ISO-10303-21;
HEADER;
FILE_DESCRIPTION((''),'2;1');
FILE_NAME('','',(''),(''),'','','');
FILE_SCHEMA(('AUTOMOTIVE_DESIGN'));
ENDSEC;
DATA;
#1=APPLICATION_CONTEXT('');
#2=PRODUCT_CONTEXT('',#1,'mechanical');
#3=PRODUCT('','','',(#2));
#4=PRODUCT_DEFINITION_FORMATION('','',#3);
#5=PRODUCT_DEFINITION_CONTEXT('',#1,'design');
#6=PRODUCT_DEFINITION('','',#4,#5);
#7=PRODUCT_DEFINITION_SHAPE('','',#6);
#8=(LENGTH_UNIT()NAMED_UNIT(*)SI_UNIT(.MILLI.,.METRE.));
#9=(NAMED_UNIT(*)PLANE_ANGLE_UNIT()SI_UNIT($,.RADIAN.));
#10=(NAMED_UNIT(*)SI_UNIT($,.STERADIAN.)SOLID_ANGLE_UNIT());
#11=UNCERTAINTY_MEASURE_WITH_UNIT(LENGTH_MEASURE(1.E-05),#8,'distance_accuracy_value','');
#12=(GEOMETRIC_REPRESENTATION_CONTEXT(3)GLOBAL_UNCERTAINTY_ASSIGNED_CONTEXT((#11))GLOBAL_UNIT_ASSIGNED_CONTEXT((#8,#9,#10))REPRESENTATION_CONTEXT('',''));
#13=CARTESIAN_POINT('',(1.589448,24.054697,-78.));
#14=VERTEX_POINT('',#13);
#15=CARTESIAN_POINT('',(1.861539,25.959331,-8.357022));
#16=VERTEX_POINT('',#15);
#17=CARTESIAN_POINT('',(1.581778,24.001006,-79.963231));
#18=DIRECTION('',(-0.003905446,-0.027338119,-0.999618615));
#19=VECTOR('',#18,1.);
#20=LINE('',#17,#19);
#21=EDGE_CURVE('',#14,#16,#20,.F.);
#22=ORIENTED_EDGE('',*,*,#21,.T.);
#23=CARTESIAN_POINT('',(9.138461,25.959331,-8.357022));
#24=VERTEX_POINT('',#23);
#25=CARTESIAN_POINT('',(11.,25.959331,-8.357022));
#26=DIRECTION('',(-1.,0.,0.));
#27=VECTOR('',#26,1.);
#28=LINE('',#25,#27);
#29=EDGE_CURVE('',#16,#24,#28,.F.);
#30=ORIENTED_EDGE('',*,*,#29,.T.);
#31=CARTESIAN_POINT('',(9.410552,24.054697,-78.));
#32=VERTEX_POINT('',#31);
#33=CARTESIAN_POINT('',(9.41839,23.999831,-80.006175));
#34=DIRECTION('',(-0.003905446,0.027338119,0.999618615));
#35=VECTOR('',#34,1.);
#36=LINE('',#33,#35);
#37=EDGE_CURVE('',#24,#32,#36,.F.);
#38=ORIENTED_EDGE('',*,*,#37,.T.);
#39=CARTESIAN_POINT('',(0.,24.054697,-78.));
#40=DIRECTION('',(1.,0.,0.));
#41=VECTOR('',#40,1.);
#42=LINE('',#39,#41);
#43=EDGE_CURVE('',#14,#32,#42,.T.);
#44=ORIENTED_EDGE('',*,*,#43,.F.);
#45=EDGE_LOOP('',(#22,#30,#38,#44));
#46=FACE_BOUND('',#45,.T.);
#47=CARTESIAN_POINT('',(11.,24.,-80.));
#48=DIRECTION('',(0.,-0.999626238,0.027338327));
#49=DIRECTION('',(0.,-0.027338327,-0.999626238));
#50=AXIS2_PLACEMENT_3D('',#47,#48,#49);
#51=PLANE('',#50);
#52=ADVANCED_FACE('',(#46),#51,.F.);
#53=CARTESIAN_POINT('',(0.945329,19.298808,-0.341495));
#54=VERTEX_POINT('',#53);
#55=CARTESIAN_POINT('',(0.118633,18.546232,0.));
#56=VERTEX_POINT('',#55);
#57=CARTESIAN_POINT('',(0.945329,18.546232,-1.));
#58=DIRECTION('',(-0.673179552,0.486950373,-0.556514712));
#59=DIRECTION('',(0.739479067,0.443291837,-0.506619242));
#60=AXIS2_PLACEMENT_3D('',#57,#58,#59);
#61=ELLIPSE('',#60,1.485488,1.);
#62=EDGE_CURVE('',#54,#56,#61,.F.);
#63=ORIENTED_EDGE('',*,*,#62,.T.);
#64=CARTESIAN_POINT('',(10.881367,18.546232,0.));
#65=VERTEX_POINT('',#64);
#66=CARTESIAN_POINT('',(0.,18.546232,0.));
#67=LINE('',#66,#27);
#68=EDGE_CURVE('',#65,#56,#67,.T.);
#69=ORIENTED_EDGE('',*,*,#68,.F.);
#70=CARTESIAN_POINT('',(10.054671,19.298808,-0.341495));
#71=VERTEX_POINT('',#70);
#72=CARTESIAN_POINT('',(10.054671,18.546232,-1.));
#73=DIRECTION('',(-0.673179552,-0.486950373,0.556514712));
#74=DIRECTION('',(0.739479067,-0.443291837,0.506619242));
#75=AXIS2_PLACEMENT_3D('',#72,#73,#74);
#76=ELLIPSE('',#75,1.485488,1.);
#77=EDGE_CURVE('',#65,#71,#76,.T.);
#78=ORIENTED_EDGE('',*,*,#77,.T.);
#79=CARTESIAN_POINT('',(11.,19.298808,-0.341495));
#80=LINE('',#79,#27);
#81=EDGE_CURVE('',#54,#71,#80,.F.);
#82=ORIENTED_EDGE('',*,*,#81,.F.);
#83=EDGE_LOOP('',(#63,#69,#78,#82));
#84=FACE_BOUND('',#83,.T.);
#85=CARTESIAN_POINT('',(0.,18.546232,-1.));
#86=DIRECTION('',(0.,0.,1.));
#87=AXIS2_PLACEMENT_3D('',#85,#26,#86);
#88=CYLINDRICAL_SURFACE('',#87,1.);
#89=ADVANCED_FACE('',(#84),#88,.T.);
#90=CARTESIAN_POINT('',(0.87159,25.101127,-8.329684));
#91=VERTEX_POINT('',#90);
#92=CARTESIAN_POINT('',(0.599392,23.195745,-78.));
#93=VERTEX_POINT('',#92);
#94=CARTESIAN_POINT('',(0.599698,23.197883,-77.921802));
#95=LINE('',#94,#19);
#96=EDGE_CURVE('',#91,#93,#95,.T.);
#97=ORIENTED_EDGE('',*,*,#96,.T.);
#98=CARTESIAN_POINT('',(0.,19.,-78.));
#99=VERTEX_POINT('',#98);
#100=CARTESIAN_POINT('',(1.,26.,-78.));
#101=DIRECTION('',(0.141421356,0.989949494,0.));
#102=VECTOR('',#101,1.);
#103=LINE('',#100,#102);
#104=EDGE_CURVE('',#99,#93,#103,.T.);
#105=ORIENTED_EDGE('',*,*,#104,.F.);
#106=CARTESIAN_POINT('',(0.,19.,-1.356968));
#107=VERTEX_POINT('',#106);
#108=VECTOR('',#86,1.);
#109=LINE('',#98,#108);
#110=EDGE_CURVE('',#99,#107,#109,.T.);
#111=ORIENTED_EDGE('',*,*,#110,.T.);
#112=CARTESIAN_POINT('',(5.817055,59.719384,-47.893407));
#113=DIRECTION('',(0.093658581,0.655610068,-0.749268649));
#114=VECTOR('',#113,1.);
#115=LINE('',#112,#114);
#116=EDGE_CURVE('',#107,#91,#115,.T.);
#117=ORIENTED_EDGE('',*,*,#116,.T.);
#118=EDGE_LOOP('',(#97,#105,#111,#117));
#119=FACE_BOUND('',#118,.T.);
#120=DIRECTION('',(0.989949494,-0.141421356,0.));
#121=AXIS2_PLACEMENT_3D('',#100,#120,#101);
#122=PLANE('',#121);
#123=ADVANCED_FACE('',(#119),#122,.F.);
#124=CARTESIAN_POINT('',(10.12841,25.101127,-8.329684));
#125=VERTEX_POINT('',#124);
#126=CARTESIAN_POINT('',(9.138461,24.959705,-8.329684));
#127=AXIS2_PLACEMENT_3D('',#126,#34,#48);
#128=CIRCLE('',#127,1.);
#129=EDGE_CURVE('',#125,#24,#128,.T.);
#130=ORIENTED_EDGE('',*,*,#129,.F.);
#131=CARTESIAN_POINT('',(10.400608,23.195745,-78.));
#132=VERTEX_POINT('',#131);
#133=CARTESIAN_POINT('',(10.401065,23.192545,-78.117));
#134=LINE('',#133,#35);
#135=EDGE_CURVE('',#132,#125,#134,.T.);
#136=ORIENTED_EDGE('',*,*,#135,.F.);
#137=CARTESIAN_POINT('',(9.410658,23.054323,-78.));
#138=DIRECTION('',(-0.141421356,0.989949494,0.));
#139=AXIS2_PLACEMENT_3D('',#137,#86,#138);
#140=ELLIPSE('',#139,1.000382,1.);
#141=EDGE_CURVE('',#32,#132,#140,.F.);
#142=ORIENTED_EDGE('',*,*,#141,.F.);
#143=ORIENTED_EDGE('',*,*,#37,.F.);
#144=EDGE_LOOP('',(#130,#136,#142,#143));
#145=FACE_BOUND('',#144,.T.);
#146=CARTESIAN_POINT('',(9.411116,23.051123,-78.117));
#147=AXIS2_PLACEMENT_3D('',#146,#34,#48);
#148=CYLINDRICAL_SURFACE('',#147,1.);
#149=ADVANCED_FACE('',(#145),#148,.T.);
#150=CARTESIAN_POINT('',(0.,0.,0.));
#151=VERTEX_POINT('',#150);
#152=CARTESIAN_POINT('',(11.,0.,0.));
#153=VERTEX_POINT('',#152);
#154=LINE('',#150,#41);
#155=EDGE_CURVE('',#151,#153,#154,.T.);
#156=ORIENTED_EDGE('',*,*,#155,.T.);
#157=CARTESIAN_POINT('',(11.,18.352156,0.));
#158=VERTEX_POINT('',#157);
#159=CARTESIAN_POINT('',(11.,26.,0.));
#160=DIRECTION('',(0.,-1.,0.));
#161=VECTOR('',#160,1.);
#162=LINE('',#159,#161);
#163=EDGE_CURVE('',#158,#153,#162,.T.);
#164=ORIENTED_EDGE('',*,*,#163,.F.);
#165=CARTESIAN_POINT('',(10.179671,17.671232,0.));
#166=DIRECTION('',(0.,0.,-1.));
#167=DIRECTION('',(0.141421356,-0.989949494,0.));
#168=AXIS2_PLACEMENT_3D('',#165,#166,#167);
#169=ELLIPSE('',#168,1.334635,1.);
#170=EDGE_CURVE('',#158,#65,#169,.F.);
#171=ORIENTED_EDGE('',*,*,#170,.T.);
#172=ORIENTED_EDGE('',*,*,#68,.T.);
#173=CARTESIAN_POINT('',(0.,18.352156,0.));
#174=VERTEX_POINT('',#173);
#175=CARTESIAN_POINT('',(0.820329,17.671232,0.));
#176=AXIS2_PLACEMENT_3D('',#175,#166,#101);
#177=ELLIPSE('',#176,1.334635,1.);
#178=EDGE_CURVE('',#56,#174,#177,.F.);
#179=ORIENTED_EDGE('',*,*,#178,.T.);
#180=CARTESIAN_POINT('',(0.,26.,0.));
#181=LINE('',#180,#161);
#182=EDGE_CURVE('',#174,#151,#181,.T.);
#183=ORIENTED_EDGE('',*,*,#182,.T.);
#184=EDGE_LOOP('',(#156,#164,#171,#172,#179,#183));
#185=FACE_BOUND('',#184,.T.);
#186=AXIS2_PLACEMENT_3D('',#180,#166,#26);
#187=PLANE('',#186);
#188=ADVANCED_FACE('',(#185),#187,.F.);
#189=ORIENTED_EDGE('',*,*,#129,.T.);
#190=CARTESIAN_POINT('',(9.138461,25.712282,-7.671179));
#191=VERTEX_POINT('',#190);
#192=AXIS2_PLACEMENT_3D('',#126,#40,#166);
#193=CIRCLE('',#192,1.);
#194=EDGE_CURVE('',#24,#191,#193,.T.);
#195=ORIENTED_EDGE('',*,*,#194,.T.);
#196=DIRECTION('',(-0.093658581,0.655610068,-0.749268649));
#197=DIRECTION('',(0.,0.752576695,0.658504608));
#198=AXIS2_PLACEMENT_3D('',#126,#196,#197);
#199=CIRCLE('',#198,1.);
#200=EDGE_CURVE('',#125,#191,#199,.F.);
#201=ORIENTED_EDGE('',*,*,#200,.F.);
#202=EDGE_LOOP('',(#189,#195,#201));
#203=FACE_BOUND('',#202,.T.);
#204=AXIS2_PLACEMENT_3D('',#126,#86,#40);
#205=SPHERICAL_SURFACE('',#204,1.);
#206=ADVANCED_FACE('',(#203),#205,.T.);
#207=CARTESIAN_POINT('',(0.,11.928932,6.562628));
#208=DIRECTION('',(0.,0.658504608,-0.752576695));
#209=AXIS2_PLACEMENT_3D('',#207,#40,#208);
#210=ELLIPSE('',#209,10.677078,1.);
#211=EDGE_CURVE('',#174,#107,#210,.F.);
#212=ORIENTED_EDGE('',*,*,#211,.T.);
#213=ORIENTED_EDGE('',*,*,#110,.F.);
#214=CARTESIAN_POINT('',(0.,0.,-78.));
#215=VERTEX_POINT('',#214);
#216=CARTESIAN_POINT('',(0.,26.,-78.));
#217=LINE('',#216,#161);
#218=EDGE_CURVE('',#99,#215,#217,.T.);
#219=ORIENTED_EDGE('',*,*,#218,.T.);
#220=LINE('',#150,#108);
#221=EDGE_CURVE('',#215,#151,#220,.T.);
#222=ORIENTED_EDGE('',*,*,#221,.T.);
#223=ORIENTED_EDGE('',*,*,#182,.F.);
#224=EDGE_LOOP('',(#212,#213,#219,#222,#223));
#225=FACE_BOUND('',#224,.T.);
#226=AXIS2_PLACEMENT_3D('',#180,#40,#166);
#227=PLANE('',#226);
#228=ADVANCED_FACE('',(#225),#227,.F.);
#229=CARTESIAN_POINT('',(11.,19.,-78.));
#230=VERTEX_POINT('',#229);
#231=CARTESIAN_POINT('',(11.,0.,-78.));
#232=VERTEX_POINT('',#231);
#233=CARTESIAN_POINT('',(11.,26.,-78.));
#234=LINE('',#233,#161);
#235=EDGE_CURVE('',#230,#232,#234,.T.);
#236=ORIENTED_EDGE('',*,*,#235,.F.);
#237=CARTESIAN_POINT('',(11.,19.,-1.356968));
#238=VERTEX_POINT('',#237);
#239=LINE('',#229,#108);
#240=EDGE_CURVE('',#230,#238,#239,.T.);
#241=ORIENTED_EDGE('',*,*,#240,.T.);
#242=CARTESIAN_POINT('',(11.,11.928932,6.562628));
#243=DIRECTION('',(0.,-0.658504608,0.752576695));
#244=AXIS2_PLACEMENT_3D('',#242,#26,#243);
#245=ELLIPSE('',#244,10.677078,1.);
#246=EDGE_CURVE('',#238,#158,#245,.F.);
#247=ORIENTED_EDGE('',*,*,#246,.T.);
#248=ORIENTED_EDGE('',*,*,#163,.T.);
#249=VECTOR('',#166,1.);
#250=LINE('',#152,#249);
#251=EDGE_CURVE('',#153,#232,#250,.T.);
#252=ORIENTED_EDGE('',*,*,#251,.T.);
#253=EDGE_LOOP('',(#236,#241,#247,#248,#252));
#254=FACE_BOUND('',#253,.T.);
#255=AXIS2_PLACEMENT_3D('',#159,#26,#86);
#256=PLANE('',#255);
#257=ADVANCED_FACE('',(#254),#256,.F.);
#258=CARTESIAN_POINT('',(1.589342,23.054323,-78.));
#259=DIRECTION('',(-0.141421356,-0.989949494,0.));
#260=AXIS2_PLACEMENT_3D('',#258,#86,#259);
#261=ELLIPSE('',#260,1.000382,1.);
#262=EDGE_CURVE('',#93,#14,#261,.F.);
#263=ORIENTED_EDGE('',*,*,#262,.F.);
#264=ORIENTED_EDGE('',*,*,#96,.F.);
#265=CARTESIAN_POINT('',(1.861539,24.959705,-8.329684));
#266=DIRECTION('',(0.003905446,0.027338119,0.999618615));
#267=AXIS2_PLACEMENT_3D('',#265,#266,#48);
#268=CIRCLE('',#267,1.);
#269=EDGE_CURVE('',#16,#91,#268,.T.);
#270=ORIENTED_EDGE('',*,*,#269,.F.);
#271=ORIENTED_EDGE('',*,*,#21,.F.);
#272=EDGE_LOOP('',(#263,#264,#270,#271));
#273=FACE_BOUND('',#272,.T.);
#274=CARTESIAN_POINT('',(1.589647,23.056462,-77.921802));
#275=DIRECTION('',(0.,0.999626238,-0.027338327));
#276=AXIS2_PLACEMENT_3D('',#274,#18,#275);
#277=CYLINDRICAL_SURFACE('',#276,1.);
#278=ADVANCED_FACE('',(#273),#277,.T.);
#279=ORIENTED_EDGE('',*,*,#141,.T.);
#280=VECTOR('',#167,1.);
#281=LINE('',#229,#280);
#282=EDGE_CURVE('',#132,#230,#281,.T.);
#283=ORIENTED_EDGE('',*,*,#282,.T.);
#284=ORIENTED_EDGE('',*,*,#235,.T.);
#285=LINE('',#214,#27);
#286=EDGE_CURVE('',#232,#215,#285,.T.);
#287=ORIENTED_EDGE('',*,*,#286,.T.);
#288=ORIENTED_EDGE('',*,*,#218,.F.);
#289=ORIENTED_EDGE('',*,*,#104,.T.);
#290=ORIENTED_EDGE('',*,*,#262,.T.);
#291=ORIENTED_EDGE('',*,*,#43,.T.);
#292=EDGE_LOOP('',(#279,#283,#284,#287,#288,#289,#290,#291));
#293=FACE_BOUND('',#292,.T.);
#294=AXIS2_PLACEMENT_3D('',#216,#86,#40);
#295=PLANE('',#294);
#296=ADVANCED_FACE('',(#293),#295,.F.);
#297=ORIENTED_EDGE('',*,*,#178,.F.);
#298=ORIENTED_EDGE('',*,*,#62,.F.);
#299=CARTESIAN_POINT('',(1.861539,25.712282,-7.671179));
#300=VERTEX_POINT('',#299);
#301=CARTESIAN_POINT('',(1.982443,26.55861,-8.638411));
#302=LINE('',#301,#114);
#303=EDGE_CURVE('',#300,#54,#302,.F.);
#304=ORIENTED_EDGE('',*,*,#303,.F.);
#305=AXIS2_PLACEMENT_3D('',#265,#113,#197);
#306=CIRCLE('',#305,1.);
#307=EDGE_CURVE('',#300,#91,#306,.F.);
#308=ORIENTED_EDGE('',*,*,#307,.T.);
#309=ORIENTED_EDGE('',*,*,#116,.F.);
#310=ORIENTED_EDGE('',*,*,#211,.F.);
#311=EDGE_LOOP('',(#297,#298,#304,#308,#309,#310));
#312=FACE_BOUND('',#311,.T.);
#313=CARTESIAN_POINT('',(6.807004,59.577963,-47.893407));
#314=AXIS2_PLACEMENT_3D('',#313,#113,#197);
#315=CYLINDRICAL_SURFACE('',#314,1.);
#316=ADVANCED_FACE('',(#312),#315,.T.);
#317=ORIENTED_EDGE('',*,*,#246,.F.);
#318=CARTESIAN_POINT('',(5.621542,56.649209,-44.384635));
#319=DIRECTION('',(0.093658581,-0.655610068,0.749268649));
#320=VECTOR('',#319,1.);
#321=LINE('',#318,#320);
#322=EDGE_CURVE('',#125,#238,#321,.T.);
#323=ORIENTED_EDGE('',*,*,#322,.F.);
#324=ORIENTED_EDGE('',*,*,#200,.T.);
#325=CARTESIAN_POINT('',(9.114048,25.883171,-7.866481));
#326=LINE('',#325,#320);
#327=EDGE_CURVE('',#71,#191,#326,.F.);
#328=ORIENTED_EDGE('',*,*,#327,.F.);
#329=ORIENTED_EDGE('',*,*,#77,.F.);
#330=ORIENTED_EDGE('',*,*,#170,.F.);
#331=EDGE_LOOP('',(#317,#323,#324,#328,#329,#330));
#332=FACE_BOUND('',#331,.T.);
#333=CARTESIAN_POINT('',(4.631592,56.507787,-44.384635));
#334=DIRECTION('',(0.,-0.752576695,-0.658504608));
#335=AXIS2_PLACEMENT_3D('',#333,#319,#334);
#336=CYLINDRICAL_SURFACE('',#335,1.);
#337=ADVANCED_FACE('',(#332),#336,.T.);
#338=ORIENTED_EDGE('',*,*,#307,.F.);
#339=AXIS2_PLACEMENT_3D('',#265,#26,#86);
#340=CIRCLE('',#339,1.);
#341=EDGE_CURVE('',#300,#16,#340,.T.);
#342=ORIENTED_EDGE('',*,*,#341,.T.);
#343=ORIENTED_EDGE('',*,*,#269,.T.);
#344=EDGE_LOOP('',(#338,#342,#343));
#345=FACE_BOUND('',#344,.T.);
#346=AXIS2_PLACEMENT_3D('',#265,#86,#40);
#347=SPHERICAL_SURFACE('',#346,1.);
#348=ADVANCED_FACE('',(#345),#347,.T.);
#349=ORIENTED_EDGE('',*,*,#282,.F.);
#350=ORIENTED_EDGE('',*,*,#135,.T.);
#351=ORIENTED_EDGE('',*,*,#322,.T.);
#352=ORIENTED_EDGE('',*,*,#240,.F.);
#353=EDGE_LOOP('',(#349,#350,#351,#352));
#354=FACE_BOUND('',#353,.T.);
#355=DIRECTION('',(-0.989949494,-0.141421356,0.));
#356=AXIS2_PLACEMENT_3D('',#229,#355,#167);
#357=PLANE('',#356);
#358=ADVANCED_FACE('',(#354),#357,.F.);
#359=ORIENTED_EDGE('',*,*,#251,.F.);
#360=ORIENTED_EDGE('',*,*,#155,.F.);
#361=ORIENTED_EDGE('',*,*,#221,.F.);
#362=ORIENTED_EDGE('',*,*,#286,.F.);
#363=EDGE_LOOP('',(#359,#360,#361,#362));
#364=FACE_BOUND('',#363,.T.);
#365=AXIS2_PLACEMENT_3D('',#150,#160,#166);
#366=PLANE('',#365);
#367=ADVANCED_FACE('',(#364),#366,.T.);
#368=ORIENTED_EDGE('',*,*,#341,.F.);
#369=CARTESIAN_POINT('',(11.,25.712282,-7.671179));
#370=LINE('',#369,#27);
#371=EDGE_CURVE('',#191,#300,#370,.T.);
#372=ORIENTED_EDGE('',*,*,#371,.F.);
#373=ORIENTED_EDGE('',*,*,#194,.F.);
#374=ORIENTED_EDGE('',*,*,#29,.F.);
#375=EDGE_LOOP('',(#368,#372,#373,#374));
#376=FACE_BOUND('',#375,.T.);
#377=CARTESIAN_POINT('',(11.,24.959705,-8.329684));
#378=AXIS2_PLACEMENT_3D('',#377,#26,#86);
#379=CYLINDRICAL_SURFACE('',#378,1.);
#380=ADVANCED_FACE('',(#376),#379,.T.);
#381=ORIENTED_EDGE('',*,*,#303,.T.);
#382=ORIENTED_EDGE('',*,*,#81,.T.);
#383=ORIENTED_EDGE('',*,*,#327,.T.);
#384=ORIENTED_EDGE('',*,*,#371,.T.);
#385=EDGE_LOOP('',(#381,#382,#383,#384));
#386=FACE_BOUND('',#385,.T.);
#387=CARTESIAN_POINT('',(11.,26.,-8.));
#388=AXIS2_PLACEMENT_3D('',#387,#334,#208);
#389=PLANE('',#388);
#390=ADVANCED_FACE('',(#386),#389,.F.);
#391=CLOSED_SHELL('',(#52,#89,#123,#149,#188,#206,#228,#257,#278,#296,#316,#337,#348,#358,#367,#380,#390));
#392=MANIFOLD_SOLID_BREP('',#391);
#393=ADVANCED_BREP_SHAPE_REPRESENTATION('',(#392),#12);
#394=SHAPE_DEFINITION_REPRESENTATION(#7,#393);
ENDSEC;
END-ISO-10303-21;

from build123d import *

# Parameters (mm, degrees)
CROQUIS1_W              = 11
CROQUIS1_H              = 78
SALIENTE_EXTRUIR1_DEPTH = 26
CORTAR_EXTRUIR3_DEPTH   = 83.95179323
CORTAR_EXTRUIR6_DEPTH   = 83.95179323
CORTAR_EXTRUIR7_DEPTH   = 83.95179323
REDONDEO4_R             = 1


with BuildPart() as part:
    # Croquis1 → Saliente-Extruir1 (new body)
    with BuildSketch(Plane(origin=(0, 0, 0), x_dir=(1, 0, 0), z_dir=(0, 1, 0))):
        with Locations((5.5, 39)):
            Rectangle(CROQUIS1_W, CROQUIS1_H)
    extrude(amount=SALIENTE_EXTRUIR1_DEPTH)

    # Croquis4 → Cortar-Extruir3 (cut, through all)
    with BuildSketch(Plane.XY):
        Polygon((0, 26), (1, 26), (0, 19), align=None)
        Polygon((10, 26), (11, 26), (11, 19), align=None)
    extrude(amount=-CORTAR_EXTRUIR3_DEPTH, mode=Mode.SUBTRACT)

    # Croquis6 → Cortar-Extruir6 (cut, through all)
    with BuildSketch(Plane.ZY):
        Polygon((0, 19), (0, 26), (-8, 26), align=None)
    extrude(amount=-CORTAR_EXTRUIR6_DEPTH, mode=Mode.SUBTRACT)

    # Croquis8 → Cortar-Extruir7 (cut, through all)
    with BuildSketch(Plane.ZY):
        Polygon((-80, 26), (-6.869978001, 26), (-80, 24), align=None)
    extrude(amount=-CORTAR_EXTRUIR7_DEPTH, mode=Mode.SUBTRACT)

    # Redondeo4
    # the kernel refuses this fillet: 1 mm, written as the material it takes off along each edge
    with BuildSketch(Plane(origin=(1.86153901, 24.959705258, -8.329683982), x_dir=(-0.5677189271234413, -0.022505525063317232, -0.8229147714845281), z_dir=(-0.44431309218949805, 0.8499040291343537, 0.28328257512631844))) as redondeo4_piece_1_section:
        Polygon((-1.655326892, -1.655326892), (1.655326892, -1.655326892), (1.655326892, 1.655326892), (-1.655326892, 1.655326892), align=None)
    redondeo4_piece_1 = extrude(amount=1.655326892, mode=Mode.PRIVATE)
    redondeo4_piece_1 = split(redondeo4_piece_1, bisect_by=Plane(origin=(1.86153901, 24.959705258, -8.329683982), z_dir=(-1, 0, 0)), keep=Keep.TOP, mode=Mode.PRIVATE)
    redondeo4_piece_1 = split(redondeo4_piece_1, bisect_by=Plane(origin=(1.86153901, 24.959705258, -8.329683982), z_dir=(0.09365858115816941, 0.6556100681071857, -0.7492686492653552)), keep=Keep.TOP, mode=Mode.PRIVATE)
    redondeo4_piece_1 = split(redondeo4_piece_1, bisect_by=Plane(origin=(1.86153901, 24.959705258, -8.329683982), z_dir=(0.0039054455429706233, 0.02733811880079436, 0.9996186146503798)), keep=Keep.TOP, mode=Mode.PRIVATE)
    redondeo4_piece_1 = split(redondeo4_piece_1, bisect_by=Plane(origin=(1.86153901, 25.959331496, -8.357022309), z_dir=(0, -0.9996262380814909, 0.027338327290574692)), keep=Keep.TOP, mode=Mode.PRIVATE)
    redondeo4_piece_1 = split(redondeo4_piece_1, bisect_by=Plane(origin=(1.86153901, 25.712281952, -7.671179374), z_dir=(0, -0.7525766947068778, -0.658504607868518)), keep=Keep.TOP, mode=Mode.PRIVATE)
    redondeo4_piece_1 = split(redondeo4_piece_1, bisect_by=Plane(origin=(0.871589516, 25.101126614, -8.329683982), z_dir=(0.9899494936611666, -0.14142135623730953, 0)), keep=Keep.TOP, mode=Mode.PRIVATE)
    redondeo4_piece_1 = redondeo4_piece_1 - Plane(origin=(1.86153901, 24.959705258, -8.329683982), x_dir=(0.44431309218949805, -0.8499040291343537, -0.28328257512631844), z_dir=(-0.5677189271234413, -0.022505525063317232, -0.8229147714845281)) * Sphere(REDONDEO4_R, mode=Mode.PRIVATE)
    add(redondeo4_piece_1, mode=Mode.SUBTRACT)
    with BuildSketch(Plane(origin=(9.13846099, 24.959705258, -8.329683982), x_dir=(-0.5677189271234413, 0.02250552506331723, 0.8229147714845281), z_dir=(0.44431309218949794, 0.8499040291343537, 0.2832825751263184))) as redondeo4_piece_2_section:
        Polygon((-1.655326892, -1.655326892), (1.655326892, -1.655326892), (1.655326892, 1.655326892), (-1.655326892, 1.655326892), align=None)
    redondeo4_piece_2 = extrude(amount=1.655326892, mode=Mode.PRIVATE)
    redondeo4_piece_2 = split(redondeo4_piece_2, bisect_by=Plane(origin=(9.13846099, 24.959705258, -8.329683982), z_dir=(1, 0, 0)), keep=Keep.TOP, mode=Mode.PRIVATE)
    redondeo4_piece_2 = split(redondeo4_piece_2, bisect_by=Plane(origin=(9.13846099, 24.959705258, -8.329683982), z_dir=(-0.09365858115816958, 0.6556100681071857, -0.7492686492653552)), keep=Keep.TOP, mode=Mode.PRIVATE)
    redondeo4_piece_2 = split(redondeo4_piece_2, bisect_by=Plane(origin=(9.13846099, 24.959705258, -8.329683982), z_dir=(-0.0039054455429706303, 0.02733811880079436, 0.9996186146503798)), keep=Keep.TOP, mode=Mode.PRIVATE)
    redondeo4_piece_2 = split(redondeo4_piece_2, bisect_by=Plane(origin=(9.13846099, 25.959331496, -8.357022309), z_dir=(0, -0.9996262380814909, 0.027338327290574692)), keep=Keep.TOP, mode=Mode.PRIVATE)
    redondeo4_piece_2 = split(redondeo4_piece_2, bisect_by=Plane(origin=(9.13846099, 25.712281952, -7.671179374), z_dir=(0, -0.7525766947068778, -0.658504607868518)), keep=Keep.TOP, mode=Mode.PRIVATE)
    redondeo4_piece_2 = split(redondeo4_piece_2, bisect_by=Plane(origin=(10.128410484, 25.101126614, -8.329683982), z_dir=(-0.9899494936611666, -0.14142135623730978, 0)), keep=Keep.TOP, mode=Mode.PRIVATE)
    redondeo4_piece_2 = redondeo4_piece_2 - Plane(origin=(9.13846099, 24.959705258, -8.329683982), x_dir=(-0.44431309218949794, -0.8499040291343537, -0.2832825751263184), z_dir=(-0.5677189271234413, 0.02250552506331723, 0.8229147714845281)) * Sphere(REDONDEO4_R, mode=Mode.PRIVATE)
    add(redondeo4_piece_2, mode=Mode.SUBTRACT)
    with BuildSketch(Plane(origin=(-1.134420566, 19, 0), x_dir=(0, -1, 0), z_dir=(1, 0, 0))) as redondeo4_piece_3:
        with BuildLine():
            CenterArc((REDONDEO4_R * 0.453768226592, REDONDEO4_R), REDONDEO4_R, 221.185925166, 48.814074834)
            Line((-REDONDEO4_R * 0.298808468115, REDONDEO4_R * 0.341495392131), (0, 0))
            Line((0, 0), (REDONDEO4_R * 0.453768226592, 0))
        make_face()
    extrude(amount=13.268841133, mode=Mode.SUBTRACT)
    with BuildSketch(Plane(origin=(0.96681533, 25.767707313, -7.734522643), x_dir=(0.9956043743251828, -0.06167460725908129, 0.07048526543895174), z_dir=(-0.09365858115816941, -0.6556100681071857, 0.7492686492653552)), Plane(origin=(12.052106546, 11.635254179, 8.416852367), x_dir=(-0.9956043743251827, -0.061674607259081395, 0.07048526543895185), z_dir=(-0.09365858115816958, 0.6556100681071857, -0.7492686492653552))) as redondeo4_piece_4:
        with BuildLine():
            CenterArc((REDONDEO4_R * 0.898673913625, -REDONDEO4_R), REDONDEO4_R, 90, 83.890414747)
            Line((-REDONDEO4_R * 0.0956462392286, -REDONDEO4_R * 0.893569583162), (0, 0))
            Line((0, 0), (REDONDEO4_R * 0.898673913625, 0))
        make_face()
    extrude(amount=21.556186859, mode=Mode.SUBTRACT)
    with BuildSketch(Plane(origin=(1.86153901, 25.970032196, -7.965751081), x_dir=(0, -0.6585046078685161, 0.7525766947068797), z_dir=(1, 0, 0))) as redondeo4_piece_5:
        with BuildLine():
            CenterArc((REDONDEO4_R * 0.391417524948, REDONDEO4_R), REDONDEO4_R, 227.247508882, 42.752491118)
            Line((-REDONDEO4_R * 0.287415146966, REDONDEO4_R * 0.265707004295), (0, 0))
            Line((0, 0), (REDONDEO4_R * 0.391417524948, 0))
        make_face()
    extrude(amount=7.27692198, mode=Mode.SUBTRACT)
    with BuildSketch(Plane(origin=(0.994203443, 25.9594241, -8.353636218), x_dir=(-0.14136742020391727, -0.9895719414274202, 0.027615670269893054), z_dir=(-0.0039054455429706233, -0.02733811880079436, -0.9996186146503798)), Plane(origin=(10.286368809, 23.995418339, -80.167528475), x_dir=(0.14136742020391577, -0.9895719414274206, 0.027615670269893058), z_dir=(-0.0039054455429706303, 0.02733811880079436, 0.9996186146503798))) as redondeo4_piece_6:
        with BuildLine():
            CenterArc((REDONDEO4_R * 0.867342181609, -REDONDEO4_R), REDONDEO4_R, 90, 81.872956917)
            Line((-REDONDEO4_R * 0.122614861744, -REDONDEO4_R * 0.85863150168), (0, 0))
            Line((0, 0), (REDONDEO4_R * 0.867342181609, 0))
        make_face()
    extrude(amount=71.841291473, mode=Mode.SUBTRACT)


solid = part.part
